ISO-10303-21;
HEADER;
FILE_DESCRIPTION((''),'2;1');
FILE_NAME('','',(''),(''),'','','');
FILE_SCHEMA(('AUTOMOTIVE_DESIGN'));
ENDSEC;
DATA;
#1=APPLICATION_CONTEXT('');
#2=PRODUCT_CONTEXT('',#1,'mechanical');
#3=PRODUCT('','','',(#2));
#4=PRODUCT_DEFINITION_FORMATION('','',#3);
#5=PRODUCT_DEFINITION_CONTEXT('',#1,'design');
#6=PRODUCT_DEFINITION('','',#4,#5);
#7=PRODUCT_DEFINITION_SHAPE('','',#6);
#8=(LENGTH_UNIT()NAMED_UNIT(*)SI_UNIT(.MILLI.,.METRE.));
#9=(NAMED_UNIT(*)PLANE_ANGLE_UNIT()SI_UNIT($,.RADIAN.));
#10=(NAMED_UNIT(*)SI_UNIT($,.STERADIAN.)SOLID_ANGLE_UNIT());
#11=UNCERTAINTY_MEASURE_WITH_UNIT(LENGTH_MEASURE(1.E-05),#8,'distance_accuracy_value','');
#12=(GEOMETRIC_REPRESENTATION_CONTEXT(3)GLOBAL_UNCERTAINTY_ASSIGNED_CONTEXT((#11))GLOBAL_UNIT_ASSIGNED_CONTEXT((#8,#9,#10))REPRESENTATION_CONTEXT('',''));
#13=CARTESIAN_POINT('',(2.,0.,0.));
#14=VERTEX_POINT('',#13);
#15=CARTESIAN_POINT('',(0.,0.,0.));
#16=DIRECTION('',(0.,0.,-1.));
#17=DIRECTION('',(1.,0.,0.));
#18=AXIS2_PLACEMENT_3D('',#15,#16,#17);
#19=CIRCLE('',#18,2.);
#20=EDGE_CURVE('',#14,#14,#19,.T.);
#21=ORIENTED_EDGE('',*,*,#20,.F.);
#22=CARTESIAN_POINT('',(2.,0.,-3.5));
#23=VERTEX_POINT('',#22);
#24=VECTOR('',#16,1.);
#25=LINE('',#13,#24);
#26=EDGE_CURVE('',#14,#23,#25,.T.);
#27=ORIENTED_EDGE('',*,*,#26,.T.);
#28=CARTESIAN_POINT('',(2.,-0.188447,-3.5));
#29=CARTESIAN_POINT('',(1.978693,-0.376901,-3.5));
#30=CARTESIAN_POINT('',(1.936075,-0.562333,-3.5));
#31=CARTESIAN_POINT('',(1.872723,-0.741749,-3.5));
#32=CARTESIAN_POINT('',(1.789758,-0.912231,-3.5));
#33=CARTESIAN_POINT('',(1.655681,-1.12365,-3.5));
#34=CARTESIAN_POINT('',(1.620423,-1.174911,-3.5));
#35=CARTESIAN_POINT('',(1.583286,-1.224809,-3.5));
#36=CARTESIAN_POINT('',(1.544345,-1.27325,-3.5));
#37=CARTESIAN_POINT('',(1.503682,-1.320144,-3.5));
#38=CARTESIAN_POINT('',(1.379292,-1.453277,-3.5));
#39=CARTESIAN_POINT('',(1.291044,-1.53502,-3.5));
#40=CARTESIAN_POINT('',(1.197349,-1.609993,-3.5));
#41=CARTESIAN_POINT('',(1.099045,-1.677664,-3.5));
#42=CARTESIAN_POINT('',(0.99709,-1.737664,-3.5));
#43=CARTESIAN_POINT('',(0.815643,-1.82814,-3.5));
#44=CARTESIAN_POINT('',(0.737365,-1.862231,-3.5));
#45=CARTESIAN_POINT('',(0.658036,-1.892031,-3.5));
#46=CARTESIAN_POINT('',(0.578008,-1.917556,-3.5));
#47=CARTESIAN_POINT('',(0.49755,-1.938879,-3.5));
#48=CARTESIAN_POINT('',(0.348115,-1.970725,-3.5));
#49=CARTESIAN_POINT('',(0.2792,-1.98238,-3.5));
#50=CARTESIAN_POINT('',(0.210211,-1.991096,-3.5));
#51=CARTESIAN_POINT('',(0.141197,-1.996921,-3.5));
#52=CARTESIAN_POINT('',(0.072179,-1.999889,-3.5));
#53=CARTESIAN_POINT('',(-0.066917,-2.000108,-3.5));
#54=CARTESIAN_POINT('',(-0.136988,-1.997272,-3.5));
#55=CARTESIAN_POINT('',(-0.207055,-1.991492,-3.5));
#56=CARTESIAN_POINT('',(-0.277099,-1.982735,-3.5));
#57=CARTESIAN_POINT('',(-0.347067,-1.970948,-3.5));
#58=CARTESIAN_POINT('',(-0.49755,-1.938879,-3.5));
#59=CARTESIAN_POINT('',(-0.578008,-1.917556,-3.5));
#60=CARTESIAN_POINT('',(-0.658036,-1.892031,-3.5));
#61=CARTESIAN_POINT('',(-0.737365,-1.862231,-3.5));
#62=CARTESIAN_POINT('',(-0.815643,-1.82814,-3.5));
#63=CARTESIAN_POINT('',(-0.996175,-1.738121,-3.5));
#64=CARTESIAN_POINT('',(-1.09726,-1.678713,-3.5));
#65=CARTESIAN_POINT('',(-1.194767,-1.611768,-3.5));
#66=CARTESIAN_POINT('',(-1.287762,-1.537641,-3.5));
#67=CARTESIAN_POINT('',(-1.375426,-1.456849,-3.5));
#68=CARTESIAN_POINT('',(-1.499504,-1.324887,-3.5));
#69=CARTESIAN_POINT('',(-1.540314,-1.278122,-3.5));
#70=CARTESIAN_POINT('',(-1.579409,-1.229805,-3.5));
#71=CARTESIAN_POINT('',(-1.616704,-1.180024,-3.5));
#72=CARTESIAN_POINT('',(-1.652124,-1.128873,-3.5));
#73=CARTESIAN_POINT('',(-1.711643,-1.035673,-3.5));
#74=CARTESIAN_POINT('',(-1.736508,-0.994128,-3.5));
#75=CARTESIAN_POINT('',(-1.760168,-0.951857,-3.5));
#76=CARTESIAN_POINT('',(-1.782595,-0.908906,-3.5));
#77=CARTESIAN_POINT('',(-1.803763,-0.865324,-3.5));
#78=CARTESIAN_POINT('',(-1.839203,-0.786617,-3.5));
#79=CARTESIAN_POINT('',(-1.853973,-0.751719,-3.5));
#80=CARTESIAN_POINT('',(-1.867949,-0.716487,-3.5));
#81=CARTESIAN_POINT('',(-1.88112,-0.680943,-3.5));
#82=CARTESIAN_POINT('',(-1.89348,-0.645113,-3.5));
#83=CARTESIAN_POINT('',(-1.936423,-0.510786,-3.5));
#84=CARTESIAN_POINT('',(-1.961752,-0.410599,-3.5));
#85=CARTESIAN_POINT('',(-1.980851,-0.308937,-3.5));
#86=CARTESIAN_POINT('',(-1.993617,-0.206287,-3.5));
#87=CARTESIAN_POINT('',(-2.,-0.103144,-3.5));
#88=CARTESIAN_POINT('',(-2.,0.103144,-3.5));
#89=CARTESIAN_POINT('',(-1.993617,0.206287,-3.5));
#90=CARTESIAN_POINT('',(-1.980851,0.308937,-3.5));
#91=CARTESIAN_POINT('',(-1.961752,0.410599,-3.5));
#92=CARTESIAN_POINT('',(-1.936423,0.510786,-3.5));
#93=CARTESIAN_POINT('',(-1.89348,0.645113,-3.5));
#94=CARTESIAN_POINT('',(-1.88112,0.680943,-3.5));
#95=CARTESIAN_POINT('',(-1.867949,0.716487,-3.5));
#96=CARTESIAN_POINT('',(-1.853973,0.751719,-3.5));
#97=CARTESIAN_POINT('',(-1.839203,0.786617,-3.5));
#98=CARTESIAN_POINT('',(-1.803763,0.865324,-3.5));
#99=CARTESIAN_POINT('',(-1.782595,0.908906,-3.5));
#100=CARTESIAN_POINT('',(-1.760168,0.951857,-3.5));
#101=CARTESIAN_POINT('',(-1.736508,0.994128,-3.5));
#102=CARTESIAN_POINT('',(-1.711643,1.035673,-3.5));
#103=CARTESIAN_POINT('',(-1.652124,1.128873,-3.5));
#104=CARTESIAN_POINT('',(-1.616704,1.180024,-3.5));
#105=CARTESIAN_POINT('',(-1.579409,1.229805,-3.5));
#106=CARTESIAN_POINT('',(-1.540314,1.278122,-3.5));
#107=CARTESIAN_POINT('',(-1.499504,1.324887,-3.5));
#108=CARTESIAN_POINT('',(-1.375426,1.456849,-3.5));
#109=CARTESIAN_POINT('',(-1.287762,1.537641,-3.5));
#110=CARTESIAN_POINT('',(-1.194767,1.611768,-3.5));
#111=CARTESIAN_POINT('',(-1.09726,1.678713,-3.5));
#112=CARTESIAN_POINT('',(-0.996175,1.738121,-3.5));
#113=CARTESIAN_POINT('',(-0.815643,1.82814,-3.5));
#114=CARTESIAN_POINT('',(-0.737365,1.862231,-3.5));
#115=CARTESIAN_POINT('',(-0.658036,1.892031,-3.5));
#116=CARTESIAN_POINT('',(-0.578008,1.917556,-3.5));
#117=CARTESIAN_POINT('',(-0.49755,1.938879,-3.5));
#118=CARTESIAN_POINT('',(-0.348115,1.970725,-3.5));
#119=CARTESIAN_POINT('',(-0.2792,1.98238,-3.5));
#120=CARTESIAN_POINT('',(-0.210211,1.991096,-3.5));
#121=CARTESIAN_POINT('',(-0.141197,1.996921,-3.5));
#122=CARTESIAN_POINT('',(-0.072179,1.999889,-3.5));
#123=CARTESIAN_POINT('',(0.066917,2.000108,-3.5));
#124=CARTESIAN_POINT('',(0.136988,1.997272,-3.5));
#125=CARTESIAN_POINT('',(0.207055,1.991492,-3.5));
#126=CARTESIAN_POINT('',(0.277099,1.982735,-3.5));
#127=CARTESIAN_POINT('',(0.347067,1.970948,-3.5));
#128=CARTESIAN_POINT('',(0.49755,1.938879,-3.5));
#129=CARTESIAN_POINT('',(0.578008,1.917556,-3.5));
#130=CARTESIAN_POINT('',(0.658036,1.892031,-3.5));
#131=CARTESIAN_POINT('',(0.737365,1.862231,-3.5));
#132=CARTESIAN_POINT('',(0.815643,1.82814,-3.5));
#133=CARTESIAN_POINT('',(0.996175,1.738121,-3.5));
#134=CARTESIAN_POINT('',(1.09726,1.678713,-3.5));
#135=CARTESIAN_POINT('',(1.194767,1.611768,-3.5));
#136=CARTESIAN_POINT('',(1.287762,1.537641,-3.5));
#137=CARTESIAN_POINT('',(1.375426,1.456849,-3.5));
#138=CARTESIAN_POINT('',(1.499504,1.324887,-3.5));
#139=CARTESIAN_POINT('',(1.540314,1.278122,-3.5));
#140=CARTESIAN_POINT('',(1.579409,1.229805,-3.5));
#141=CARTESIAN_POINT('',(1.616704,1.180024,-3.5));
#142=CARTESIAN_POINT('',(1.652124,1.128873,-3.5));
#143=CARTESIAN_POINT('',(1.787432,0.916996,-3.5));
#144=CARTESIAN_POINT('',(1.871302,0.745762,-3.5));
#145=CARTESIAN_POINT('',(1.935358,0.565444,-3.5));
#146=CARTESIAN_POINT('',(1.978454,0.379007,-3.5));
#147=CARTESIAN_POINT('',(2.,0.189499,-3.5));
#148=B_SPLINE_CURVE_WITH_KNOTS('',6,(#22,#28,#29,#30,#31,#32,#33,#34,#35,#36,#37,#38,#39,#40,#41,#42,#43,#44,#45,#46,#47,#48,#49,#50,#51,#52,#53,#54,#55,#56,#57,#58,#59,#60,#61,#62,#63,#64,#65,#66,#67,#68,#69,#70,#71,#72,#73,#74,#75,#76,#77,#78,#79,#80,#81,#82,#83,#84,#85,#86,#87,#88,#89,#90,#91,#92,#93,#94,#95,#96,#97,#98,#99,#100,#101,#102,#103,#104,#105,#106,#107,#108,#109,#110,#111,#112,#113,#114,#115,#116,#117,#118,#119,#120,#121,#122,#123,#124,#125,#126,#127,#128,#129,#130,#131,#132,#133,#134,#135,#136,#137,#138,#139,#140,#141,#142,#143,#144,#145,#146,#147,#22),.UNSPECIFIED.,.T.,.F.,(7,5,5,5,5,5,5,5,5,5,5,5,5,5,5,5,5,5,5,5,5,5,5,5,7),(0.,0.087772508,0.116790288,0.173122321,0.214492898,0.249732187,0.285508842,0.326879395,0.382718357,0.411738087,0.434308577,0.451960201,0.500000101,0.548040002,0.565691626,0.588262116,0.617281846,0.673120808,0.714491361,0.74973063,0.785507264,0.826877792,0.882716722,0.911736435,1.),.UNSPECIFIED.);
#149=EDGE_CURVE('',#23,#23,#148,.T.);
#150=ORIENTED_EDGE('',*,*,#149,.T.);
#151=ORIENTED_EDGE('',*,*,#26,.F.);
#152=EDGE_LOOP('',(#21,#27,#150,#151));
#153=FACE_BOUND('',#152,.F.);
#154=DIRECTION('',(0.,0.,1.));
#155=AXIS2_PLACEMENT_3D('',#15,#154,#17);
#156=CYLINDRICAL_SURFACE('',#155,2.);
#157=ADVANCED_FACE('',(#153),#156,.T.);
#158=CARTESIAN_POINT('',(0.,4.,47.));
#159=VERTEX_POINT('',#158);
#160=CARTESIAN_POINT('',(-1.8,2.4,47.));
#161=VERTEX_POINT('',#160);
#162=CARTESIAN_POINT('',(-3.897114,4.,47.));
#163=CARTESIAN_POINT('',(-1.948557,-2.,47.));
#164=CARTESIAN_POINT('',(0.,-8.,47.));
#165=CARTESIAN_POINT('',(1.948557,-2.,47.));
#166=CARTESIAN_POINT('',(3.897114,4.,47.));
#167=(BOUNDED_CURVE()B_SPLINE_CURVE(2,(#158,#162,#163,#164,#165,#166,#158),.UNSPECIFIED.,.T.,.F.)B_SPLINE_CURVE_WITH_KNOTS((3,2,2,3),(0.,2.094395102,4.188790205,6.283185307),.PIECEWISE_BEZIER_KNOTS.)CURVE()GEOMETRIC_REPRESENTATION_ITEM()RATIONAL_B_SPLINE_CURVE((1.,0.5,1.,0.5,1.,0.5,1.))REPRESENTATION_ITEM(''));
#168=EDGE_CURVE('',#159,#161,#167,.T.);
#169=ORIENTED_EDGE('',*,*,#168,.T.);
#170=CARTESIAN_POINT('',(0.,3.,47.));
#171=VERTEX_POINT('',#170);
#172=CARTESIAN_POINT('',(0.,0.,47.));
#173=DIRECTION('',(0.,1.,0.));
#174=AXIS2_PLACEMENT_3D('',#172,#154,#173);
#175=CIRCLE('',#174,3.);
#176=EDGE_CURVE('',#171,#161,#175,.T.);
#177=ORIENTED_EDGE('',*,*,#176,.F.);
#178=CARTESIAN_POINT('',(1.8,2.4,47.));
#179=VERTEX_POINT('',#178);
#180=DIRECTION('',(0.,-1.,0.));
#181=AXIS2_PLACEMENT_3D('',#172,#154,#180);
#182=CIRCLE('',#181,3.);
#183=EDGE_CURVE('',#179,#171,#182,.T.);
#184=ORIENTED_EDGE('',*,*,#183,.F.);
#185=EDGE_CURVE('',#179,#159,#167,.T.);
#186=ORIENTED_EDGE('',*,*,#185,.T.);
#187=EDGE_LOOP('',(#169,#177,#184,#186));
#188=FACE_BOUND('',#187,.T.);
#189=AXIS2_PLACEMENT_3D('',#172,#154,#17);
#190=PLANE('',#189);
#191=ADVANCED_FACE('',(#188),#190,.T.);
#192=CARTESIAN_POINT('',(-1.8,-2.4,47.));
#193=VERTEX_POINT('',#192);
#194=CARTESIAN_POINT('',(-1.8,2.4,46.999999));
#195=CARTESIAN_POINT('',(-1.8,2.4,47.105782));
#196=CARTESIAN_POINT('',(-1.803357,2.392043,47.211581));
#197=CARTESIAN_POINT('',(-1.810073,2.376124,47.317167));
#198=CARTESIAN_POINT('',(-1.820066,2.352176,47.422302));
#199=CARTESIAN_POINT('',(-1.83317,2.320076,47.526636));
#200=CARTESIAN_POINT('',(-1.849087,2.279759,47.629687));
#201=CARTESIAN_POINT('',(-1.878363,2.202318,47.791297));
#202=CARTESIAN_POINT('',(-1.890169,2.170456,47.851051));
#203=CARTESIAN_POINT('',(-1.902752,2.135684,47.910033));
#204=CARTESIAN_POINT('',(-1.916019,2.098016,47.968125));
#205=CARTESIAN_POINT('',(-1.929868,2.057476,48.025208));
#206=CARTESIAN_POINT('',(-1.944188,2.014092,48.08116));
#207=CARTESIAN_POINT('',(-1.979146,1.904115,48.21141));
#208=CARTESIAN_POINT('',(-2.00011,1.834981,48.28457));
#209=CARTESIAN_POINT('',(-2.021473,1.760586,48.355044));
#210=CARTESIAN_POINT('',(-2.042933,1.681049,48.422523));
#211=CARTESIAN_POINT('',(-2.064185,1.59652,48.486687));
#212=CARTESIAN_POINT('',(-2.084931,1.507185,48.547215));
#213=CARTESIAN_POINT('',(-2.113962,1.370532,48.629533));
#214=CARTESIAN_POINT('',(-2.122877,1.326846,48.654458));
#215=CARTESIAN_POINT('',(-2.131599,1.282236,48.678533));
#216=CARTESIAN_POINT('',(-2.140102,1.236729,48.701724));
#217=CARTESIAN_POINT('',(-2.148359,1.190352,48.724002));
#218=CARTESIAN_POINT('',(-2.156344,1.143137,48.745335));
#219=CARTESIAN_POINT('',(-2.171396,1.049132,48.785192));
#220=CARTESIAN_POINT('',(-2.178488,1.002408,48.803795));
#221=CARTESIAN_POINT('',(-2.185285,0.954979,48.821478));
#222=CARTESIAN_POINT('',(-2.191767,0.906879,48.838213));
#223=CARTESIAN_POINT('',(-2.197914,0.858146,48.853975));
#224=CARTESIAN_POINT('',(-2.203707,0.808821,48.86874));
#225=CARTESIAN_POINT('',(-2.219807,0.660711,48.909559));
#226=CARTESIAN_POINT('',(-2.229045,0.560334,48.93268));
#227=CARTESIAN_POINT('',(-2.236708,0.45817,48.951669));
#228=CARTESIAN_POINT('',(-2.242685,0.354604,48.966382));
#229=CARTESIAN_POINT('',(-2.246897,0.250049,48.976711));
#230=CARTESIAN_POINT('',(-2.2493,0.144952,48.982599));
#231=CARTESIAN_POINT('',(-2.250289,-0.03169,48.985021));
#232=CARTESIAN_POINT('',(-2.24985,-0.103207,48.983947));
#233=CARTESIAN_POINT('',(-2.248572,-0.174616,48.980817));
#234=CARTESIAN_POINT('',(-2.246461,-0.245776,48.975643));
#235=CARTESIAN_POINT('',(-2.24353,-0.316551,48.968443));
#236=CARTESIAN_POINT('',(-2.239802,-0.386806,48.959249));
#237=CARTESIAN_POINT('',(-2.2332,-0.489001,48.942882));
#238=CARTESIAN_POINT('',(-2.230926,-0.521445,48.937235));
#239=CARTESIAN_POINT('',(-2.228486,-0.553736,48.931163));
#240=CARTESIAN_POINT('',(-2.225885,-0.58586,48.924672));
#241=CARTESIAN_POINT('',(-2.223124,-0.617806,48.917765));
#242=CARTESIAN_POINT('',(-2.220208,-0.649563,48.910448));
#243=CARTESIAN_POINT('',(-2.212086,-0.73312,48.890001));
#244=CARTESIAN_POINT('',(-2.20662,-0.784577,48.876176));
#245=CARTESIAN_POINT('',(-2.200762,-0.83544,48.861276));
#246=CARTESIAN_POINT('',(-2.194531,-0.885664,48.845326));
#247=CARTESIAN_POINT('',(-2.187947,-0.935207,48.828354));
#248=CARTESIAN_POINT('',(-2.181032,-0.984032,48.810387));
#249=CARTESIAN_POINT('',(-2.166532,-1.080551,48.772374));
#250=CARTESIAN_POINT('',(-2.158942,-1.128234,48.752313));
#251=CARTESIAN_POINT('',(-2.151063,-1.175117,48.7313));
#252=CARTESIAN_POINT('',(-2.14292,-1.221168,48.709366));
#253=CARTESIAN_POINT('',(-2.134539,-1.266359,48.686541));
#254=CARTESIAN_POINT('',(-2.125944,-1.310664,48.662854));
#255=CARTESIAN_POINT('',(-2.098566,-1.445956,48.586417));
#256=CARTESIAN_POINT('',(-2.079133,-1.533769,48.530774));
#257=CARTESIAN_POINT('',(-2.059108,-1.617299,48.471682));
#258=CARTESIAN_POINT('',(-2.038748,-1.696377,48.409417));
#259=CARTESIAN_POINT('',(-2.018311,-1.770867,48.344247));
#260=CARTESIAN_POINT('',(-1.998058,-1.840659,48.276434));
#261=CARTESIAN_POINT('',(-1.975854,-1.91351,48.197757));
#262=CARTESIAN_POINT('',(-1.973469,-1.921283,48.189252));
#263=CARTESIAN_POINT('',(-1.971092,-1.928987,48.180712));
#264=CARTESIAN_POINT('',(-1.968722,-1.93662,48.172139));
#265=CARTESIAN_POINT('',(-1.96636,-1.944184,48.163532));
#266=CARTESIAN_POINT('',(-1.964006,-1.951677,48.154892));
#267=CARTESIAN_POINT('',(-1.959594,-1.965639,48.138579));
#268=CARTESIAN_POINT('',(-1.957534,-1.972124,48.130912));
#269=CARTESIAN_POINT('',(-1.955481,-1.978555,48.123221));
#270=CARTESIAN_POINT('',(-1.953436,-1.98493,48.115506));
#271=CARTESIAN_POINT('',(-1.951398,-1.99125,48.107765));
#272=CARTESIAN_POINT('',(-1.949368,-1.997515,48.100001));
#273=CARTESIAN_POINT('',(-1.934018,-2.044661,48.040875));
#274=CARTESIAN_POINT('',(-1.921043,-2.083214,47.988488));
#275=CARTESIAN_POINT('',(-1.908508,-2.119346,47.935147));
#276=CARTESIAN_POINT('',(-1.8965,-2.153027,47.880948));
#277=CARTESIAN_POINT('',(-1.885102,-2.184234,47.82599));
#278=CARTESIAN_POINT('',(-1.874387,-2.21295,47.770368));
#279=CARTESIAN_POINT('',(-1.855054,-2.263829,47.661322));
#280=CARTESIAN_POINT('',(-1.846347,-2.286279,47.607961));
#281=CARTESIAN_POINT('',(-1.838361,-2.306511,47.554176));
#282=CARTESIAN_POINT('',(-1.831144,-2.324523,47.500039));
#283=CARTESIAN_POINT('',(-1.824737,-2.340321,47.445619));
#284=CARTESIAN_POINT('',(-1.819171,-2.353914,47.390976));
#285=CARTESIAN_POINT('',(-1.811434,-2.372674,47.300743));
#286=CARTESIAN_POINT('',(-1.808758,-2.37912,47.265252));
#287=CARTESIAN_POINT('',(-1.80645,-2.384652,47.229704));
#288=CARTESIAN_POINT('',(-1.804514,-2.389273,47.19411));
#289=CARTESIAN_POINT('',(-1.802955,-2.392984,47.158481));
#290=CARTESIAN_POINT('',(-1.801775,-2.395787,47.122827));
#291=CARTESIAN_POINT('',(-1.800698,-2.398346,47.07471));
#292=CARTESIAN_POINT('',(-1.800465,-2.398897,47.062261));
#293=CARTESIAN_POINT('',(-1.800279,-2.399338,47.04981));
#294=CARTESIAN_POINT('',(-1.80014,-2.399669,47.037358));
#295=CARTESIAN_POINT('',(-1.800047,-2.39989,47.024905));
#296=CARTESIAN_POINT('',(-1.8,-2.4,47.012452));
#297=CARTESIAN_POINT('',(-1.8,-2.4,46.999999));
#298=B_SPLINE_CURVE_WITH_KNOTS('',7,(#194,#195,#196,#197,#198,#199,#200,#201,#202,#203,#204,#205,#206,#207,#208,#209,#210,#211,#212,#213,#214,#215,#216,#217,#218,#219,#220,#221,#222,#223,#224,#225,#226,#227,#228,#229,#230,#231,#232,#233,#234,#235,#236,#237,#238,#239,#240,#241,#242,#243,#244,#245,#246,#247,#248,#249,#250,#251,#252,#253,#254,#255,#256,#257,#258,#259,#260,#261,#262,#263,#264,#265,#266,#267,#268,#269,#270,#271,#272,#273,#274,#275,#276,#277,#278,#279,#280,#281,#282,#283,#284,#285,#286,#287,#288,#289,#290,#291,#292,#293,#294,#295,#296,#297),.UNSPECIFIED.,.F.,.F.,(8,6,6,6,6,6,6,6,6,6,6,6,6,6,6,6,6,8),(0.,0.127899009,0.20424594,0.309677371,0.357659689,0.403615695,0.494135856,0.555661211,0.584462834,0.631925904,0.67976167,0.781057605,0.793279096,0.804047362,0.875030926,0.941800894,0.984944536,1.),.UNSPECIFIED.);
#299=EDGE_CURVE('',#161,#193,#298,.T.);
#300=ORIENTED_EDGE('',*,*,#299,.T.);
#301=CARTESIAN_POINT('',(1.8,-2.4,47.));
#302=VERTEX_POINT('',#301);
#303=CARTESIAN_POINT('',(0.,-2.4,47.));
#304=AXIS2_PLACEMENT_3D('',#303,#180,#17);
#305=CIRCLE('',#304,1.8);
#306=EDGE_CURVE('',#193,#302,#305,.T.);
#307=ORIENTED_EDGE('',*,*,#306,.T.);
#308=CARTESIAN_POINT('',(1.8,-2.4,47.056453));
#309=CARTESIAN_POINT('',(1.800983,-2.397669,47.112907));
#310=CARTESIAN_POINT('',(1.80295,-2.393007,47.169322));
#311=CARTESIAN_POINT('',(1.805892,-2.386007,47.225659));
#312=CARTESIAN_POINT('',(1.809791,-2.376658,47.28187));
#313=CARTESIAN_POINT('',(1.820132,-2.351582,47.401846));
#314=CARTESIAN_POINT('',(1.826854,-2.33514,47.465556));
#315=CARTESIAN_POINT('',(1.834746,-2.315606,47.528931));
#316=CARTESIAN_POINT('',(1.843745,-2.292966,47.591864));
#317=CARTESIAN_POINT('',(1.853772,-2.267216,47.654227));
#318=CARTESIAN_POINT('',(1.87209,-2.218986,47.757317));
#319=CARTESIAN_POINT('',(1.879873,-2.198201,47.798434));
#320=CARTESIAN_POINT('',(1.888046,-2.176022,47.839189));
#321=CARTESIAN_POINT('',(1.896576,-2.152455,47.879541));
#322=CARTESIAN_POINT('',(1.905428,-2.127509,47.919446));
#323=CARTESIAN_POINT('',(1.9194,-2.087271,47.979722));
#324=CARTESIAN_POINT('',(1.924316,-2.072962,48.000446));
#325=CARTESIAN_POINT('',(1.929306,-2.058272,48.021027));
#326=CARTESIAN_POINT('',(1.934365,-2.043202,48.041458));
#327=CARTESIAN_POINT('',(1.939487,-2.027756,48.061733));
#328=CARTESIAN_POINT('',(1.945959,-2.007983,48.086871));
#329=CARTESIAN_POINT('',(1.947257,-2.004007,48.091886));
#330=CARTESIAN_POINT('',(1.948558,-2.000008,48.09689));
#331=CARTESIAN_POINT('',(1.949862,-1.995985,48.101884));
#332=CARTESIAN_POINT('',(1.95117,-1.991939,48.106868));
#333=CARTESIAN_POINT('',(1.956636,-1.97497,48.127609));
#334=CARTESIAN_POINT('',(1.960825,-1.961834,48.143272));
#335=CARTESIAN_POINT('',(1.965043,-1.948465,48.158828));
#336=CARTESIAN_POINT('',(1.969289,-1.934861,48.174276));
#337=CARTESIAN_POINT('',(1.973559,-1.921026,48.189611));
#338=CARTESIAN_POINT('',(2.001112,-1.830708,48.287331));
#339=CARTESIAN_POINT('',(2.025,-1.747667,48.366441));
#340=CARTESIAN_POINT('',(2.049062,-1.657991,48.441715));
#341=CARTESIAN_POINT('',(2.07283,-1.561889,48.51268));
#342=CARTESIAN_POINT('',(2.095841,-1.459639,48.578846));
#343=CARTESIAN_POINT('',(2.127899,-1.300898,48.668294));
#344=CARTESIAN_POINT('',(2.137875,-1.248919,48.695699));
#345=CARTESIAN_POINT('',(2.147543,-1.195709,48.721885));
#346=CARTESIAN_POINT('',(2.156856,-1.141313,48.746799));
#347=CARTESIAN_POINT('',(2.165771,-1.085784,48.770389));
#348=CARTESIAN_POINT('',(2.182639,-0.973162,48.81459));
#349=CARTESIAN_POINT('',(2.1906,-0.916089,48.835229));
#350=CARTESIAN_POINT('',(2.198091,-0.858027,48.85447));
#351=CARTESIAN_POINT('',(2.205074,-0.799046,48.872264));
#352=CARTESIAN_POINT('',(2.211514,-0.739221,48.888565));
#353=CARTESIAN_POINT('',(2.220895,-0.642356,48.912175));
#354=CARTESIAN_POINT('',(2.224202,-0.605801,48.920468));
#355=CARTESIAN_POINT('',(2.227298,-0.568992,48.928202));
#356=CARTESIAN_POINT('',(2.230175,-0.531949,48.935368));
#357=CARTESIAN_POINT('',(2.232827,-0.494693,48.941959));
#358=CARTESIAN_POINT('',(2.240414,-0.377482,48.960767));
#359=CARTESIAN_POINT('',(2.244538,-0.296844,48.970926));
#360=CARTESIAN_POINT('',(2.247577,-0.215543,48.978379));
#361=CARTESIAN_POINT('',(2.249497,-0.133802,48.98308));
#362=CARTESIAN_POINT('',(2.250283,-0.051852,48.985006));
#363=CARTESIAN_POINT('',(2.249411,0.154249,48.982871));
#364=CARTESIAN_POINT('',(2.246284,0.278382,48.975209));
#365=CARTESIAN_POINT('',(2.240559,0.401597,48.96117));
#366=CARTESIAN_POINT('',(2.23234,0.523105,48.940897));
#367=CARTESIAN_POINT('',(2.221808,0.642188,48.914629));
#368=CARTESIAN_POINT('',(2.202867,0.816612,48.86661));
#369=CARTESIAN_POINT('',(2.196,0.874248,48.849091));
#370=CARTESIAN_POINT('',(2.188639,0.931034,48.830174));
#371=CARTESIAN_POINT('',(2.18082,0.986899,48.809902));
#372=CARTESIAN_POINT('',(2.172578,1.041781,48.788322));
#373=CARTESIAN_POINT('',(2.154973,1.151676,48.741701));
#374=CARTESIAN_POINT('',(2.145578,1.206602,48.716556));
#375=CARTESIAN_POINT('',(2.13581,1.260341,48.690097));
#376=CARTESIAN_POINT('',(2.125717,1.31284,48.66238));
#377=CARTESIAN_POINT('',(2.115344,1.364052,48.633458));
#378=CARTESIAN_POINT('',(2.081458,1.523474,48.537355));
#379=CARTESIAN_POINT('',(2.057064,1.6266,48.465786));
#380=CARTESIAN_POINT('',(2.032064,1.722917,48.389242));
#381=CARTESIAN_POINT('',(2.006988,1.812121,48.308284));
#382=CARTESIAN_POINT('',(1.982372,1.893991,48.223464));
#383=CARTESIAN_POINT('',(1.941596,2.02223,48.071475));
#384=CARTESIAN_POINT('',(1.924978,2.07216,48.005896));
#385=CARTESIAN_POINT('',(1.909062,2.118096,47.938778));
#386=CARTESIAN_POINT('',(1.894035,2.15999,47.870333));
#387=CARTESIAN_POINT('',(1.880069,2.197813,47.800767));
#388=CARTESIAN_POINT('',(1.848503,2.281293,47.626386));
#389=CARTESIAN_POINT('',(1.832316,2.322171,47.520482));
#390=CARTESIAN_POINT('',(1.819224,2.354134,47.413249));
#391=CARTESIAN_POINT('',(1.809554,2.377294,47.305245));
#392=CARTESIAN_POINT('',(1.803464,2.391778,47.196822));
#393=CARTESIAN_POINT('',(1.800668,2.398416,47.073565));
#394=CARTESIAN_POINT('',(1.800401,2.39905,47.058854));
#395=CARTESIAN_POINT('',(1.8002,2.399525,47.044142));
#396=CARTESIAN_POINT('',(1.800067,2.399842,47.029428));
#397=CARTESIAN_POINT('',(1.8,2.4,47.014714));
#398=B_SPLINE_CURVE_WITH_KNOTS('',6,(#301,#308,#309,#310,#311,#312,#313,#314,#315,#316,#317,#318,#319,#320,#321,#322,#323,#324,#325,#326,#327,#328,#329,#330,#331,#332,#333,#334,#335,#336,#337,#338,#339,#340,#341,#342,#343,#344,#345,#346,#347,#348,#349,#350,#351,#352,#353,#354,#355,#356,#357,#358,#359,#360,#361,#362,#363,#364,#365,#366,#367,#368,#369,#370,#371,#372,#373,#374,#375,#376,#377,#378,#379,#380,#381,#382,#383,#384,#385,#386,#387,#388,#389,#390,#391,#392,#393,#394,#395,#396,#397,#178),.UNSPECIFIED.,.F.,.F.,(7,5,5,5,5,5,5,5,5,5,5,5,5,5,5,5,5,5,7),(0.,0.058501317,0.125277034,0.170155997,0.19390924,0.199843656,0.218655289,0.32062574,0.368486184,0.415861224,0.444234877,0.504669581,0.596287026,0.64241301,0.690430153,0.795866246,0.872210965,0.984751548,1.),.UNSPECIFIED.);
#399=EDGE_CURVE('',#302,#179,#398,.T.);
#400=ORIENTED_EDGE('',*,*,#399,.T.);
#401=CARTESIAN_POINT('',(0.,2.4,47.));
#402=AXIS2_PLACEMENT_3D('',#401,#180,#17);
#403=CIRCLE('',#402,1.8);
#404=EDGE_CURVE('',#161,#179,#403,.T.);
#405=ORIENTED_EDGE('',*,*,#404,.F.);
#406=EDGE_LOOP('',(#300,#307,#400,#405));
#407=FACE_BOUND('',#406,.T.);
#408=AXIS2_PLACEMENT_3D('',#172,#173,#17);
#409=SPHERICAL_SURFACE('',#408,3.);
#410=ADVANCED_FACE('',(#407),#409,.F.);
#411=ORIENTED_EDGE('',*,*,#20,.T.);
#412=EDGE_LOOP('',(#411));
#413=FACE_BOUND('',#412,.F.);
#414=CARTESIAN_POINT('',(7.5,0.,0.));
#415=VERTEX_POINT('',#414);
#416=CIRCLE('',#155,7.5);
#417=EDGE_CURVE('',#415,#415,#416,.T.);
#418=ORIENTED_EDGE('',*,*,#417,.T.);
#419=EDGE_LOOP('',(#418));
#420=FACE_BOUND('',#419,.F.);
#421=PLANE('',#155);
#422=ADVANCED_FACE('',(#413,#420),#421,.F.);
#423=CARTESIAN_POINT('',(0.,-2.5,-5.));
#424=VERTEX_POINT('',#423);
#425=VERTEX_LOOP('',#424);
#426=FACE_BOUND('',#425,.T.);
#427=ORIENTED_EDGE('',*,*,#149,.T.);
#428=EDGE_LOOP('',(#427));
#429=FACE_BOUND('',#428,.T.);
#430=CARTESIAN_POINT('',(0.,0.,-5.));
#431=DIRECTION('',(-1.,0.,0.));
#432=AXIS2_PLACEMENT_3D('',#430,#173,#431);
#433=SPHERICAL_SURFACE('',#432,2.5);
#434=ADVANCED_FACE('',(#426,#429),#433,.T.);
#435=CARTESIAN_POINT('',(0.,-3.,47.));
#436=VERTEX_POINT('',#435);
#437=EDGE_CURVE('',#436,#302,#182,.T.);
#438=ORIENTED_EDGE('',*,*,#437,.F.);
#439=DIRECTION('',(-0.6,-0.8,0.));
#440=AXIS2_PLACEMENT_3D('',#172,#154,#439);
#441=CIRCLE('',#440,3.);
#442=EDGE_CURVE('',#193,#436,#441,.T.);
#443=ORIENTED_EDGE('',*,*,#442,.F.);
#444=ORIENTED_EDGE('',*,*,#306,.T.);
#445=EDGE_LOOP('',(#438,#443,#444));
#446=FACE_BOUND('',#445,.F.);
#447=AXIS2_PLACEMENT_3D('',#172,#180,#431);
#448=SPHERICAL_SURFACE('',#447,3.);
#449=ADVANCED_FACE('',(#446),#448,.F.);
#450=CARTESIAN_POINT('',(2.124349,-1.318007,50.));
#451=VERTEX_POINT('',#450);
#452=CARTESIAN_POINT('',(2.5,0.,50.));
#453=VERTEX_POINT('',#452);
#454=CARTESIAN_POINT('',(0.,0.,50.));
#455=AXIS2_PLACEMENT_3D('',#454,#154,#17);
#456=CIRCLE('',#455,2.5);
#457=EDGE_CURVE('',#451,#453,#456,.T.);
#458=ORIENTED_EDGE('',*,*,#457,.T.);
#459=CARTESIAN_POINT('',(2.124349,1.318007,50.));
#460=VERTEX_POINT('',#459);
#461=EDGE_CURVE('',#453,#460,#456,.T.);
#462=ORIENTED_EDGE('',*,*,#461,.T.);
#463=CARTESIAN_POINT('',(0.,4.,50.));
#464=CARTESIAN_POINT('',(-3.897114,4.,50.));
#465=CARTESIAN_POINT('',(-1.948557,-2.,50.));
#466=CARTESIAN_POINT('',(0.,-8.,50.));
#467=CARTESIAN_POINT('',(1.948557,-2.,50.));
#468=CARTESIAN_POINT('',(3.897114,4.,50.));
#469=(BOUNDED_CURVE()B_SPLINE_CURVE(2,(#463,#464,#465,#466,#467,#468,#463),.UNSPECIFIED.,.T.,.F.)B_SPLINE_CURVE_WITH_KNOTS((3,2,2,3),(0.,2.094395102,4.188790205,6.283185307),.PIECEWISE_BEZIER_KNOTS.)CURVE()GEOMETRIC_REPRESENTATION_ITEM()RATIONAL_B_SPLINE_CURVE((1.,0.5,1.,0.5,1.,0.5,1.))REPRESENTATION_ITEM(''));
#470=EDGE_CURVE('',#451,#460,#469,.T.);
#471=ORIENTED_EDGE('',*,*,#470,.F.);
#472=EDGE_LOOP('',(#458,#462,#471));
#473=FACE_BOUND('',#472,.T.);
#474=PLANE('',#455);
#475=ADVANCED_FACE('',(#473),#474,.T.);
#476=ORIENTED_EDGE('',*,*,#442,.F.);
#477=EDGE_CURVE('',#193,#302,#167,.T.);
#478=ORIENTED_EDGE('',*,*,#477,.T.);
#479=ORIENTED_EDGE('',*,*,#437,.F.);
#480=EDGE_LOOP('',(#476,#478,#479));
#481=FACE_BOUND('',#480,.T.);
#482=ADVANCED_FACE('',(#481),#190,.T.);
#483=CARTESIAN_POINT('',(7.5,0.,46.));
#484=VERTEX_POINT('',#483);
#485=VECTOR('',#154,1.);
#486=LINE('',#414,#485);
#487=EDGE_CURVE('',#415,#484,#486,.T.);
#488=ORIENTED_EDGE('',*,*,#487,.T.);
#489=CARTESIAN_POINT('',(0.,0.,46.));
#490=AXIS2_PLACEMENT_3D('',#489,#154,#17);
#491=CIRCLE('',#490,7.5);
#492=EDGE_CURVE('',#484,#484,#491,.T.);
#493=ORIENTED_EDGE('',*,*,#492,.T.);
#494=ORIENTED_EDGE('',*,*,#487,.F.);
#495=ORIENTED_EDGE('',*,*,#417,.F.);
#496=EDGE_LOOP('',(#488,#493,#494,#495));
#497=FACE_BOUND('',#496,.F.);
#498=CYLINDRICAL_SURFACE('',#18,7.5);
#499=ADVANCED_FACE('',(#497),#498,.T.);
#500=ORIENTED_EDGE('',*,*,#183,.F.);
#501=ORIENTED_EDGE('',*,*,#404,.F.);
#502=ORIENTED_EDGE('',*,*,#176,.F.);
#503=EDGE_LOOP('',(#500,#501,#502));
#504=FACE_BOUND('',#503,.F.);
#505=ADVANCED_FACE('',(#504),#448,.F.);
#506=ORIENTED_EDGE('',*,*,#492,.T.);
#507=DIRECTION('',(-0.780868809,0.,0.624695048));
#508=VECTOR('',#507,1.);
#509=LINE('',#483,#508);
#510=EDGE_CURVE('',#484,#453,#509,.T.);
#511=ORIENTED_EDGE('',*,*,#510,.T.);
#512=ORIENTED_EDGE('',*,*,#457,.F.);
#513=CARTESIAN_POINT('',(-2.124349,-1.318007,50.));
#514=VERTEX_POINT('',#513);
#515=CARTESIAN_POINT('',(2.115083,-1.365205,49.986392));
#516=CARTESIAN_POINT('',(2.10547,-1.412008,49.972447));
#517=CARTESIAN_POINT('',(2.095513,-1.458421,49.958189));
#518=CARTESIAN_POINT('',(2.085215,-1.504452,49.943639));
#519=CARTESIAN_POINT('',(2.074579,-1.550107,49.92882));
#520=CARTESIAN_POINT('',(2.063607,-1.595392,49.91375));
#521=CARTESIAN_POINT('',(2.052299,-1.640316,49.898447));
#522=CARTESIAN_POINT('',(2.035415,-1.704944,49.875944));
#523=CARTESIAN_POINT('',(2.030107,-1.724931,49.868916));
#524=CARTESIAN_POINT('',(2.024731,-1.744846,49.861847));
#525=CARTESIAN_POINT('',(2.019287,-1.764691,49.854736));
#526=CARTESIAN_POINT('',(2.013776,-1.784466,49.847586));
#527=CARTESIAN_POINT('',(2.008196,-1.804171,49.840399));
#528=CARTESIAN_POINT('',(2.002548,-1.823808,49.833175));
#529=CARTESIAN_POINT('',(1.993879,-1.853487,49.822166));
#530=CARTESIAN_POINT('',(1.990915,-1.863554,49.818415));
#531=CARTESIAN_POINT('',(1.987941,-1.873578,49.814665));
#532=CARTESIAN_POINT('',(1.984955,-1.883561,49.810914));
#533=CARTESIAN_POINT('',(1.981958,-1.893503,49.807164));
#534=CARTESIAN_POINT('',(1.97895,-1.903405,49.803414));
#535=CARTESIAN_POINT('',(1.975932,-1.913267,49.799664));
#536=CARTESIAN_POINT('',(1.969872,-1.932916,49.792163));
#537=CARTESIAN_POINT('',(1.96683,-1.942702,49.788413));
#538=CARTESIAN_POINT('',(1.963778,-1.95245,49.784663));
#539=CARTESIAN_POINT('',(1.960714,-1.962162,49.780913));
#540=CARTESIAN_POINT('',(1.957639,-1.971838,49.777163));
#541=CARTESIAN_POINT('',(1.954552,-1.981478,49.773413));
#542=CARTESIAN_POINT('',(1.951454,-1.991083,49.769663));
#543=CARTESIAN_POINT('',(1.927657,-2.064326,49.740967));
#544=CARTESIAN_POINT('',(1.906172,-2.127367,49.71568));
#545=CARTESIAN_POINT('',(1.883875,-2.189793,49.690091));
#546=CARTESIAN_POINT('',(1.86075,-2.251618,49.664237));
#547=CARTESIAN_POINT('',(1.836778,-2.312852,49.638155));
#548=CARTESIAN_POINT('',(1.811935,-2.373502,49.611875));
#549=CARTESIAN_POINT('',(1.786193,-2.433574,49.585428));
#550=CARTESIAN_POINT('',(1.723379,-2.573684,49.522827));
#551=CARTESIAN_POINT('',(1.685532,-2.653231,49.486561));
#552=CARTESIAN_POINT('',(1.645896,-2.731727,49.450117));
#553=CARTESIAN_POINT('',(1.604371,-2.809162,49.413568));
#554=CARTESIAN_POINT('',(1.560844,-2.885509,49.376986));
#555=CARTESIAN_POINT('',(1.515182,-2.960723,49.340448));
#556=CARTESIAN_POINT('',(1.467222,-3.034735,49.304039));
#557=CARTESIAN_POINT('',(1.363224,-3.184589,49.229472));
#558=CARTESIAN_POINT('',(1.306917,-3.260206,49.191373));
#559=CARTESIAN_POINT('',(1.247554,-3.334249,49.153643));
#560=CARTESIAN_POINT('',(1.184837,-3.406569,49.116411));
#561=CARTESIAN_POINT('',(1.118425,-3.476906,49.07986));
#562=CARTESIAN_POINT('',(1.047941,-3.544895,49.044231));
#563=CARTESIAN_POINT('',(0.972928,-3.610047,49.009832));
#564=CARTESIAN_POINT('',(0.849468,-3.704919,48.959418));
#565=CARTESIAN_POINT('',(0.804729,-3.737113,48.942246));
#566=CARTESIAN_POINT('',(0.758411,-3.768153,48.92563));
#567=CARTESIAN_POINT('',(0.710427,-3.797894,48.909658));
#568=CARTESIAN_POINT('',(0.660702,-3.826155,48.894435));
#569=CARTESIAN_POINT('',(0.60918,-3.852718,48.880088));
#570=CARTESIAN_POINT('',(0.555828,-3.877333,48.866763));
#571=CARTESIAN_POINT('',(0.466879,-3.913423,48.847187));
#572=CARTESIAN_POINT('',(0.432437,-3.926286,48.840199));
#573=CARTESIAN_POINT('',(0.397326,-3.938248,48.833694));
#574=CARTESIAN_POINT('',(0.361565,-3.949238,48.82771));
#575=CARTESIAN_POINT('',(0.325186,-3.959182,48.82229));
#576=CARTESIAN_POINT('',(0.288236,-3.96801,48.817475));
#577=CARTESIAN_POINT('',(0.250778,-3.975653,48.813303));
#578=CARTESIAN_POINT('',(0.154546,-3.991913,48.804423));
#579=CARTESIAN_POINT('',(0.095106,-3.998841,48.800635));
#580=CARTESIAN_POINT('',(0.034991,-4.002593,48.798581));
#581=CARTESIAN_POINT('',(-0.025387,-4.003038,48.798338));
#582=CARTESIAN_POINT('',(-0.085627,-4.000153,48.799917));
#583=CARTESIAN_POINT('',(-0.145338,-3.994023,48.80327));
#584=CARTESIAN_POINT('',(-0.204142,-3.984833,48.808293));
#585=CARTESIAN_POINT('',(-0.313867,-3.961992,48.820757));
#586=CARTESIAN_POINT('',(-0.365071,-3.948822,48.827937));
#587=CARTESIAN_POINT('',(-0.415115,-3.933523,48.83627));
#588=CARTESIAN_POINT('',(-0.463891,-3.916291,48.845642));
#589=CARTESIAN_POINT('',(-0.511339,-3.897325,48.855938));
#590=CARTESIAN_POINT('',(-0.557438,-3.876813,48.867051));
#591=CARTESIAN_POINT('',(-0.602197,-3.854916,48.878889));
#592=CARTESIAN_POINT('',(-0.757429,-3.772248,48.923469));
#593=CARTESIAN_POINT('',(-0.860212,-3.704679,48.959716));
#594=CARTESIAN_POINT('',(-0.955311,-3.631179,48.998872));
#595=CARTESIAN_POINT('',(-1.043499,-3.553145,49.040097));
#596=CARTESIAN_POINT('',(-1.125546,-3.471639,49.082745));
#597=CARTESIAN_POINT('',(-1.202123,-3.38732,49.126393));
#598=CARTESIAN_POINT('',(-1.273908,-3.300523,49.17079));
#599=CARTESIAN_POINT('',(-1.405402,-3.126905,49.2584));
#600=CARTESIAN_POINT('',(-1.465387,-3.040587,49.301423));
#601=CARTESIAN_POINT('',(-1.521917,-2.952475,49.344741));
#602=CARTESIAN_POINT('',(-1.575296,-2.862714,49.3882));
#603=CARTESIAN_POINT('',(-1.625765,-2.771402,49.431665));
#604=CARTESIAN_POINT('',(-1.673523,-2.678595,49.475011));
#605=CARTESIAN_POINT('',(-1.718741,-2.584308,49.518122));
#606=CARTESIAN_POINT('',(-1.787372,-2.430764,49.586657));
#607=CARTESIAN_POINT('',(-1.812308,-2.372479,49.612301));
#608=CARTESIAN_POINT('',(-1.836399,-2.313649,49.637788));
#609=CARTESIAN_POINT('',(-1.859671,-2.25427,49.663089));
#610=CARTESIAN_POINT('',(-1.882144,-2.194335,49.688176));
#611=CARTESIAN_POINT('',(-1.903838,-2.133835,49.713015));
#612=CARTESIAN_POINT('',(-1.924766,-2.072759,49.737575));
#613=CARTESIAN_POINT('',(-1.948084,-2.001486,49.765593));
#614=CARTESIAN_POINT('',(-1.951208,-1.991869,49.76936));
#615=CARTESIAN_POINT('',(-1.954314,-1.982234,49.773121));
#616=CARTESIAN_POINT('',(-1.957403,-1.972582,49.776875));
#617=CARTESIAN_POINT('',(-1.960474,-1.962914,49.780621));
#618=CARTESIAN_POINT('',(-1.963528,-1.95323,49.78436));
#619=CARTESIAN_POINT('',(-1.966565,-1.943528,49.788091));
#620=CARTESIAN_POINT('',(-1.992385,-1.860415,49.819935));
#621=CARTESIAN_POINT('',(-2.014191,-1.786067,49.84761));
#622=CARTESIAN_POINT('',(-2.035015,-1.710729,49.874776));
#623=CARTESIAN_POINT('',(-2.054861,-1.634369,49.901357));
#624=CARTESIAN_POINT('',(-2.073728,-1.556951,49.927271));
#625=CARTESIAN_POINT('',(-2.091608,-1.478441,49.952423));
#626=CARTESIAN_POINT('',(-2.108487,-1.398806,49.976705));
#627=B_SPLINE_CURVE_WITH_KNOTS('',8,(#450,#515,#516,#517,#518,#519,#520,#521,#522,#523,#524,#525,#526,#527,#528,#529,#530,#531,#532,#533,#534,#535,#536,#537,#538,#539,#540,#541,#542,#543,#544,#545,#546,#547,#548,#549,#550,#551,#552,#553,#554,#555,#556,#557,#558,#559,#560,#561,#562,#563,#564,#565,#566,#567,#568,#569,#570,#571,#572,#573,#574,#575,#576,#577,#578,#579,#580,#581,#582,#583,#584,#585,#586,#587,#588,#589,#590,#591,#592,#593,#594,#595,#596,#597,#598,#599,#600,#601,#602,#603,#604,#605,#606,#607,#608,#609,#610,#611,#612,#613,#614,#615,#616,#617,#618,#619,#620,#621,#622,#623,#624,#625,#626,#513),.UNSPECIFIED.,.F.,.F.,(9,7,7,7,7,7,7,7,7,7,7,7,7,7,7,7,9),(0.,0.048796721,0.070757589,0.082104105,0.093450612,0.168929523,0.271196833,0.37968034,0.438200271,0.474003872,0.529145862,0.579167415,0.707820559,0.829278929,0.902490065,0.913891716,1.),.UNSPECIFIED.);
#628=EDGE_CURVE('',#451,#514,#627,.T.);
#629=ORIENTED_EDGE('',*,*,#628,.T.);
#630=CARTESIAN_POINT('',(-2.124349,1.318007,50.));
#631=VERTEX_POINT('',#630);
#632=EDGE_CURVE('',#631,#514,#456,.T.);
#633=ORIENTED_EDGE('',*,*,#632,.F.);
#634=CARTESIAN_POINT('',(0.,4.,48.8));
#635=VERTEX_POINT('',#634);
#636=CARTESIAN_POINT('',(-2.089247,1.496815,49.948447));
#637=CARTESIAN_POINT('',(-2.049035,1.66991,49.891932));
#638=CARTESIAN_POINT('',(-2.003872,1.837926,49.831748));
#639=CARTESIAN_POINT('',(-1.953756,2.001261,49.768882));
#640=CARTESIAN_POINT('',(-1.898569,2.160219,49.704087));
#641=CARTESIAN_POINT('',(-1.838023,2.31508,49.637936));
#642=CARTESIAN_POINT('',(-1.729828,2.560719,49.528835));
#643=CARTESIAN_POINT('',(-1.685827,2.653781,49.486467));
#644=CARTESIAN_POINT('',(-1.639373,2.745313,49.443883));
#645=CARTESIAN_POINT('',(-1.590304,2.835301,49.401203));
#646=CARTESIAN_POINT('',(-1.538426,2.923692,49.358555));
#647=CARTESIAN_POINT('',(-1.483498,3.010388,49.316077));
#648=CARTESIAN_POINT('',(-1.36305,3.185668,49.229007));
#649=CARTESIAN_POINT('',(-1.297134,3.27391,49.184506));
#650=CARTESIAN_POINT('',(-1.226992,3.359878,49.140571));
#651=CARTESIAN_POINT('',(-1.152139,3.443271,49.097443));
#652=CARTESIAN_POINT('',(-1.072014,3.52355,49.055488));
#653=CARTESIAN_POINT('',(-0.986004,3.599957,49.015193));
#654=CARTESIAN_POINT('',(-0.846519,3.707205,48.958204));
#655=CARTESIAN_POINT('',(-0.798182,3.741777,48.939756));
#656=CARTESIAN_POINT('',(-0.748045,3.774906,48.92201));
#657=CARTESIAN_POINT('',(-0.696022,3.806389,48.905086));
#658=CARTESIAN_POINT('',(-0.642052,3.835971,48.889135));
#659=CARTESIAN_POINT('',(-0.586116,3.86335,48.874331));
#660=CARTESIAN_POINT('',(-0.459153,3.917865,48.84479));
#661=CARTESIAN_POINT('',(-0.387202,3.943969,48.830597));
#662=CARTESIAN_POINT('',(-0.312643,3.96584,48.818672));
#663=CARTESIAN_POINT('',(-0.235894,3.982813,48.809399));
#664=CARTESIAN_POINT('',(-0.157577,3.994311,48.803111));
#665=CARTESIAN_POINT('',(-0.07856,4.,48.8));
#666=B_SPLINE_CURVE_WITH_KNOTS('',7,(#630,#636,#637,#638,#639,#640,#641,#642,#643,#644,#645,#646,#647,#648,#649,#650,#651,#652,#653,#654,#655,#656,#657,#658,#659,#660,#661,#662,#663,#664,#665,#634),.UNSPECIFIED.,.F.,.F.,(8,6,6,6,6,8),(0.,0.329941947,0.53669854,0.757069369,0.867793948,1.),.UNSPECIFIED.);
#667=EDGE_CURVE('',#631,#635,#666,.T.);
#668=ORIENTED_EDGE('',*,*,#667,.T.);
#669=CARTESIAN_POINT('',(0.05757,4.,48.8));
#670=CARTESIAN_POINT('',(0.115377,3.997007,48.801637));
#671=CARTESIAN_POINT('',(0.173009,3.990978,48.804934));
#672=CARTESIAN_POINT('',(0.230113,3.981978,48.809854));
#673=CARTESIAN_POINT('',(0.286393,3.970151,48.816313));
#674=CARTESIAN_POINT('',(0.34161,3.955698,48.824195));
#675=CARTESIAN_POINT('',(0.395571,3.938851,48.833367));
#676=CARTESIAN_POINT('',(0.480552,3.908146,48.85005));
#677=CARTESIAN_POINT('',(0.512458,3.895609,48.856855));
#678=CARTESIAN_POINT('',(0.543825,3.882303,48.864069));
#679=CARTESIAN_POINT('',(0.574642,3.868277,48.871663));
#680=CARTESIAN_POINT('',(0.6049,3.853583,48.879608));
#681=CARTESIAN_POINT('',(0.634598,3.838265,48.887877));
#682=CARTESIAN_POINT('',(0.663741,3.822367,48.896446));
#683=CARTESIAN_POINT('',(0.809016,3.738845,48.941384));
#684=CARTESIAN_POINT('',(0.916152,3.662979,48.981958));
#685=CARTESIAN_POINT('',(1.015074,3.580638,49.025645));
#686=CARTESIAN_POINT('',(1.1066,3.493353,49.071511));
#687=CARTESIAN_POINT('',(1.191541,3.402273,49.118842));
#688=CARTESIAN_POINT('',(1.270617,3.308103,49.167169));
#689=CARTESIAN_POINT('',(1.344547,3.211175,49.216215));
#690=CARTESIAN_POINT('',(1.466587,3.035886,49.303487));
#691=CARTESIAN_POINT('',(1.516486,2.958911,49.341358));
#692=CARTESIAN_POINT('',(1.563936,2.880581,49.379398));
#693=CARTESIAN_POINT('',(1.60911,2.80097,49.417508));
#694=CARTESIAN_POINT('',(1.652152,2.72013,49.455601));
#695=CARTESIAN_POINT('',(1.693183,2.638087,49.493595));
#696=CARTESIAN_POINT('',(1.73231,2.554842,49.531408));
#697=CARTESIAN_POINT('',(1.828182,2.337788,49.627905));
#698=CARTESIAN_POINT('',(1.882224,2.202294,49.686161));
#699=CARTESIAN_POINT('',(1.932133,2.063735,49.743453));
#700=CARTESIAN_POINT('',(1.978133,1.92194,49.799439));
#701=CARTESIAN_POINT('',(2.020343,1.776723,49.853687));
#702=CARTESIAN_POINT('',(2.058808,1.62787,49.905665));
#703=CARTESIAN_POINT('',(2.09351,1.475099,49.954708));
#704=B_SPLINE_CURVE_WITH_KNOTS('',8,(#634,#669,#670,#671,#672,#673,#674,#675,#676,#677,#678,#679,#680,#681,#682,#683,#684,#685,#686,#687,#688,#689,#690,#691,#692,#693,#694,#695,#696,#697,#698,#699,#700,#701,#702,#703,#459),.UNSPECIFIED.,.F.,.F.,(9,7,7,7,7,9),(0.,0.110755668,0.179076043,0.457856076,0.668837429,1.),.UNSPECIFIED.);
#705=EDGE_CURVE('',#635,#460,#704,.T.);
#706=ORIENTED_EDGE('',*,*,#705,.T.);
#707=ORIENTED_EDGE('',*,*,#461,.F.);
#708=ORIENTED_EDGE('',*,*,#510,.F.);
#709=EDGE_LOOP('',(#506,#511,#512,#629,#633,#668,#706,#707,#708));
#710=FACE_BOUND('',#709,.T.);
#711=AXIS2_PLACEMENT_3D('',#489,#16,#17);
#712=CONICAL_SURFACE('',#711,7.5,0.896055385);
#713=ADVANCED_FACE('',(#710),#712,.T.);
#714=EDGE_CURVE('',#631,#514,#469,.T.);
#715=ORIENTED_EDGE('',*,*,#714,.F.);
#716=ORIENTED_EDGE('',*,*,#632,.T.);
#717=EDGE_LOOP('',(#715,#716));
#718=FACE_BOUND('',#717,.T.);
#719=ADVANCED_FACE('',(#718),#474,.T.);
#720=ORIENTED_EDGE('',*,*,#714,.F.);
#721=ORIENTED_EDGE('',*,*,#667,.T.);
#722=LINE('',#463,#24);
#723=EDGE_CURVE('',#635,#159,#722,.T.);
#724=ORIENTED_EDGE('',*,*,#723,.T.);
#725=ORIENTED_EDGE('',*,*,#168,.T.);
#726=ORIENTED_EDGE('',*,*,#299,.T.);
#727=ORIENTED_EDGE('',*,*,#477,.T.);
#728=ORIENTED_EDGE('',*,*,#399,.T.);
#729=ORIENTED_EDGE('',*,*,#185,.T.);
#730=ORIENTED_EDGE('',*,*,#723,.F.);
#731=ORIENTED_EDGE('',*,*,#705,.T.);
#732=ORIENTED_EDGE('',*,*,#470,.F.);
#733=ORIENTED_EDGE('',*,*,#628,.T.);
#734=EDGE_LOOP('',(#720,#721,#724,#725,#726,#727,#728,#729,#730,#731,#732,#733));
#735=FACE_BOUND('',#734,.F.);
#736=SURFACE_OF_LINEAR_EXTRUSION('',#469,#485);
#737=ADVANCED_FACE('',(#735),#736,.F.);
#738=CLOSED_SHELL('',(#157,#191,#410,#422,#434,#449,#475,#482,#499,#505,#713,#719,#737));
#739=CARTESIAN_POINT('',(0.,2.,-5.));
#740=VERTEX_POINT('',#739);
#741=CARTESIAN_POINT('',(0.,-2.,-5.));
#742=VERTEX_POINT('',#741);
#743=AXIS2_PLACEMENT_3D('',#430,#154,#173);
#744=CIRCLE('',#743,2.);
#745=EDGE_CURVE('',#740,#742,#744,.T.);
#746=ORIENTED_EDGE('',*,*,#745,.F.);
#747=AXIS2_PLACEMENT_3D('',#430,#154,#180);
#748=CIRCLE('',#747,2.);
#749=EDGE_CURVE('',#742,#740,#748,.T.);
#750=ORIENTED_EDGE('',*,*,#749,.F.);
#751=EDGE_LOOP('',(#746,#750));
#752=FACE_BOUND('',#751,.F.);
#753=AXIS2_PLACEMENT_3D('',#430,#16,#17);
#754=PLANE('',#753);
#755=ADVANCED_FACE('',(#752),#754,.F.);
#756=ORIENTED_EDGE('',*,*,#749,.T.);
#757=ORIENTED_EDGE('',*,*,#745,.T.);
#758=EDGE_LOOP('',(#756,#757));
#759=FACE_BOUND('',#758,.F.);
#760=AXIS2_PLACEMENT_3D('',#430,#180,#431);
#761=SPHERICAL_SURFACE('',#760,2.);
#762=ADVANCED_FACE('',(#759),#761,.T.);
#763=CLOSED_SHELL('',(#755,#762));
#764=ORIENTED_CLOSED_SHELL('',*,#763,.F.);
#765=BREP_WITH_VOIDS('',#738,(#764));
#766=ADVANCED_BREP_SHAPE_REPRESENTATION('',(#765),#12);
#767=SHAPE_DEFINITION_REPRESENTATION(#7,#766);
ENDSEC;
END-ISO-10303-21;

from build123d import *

# Parameters (mm, degrees)
F0_R     = 7.5
F1_DEPTH = 50
F2_R     = 2
F3_DEPTH = 5
F7_DEPTH = 3


# Not quite as in the source:
# - a fillet or chamfer that OpenCascade refuses, or shapes differently, is made with other operations: its cross-section is extruded or revolved along the edge and cut away or added


with BuildPart() as f1:
    # F0 (on Top) → F1 (new body)
    with BuildSketch(Plane.XY):
        Circle(F0_R)
    extrude(amount=F1_DEPTH)

    # F2 (on face) → F3 (join)
    with BuildSketch(Plane(origin=(0, 0, 0), x_dir=(1, 0, 0), z_dir=(0, 0, -1))):
        Circle(F2_R)
    extrude(amount=F3_DEPTH)

    # F4 (on face) → F5 (revolve)
    with BuildSketch(Plane(origin=(0, 0, -5), x_dir=(1, 0, 0), z_dir=(0, 0, -1))):
        with BuildLine():
            Line((0, 2), (0, 2.5))
            ThreePointArc((0, 2.5), (-2.5, 0), (0, -2.5))
            Line((0, -2.5), (0, -2))
            ThreePointArc((0, -2), (-2, 0), (0, 2))
        make_face()
    revolve(axis=Axis((0, 0, -5), (0, 1, 0)))

    # F6 (on face) → F7 (cut)
    with BuildSketch(Plane.XY.offset(50)):
        with BuildLine():
            add(Edge.make_bspline(
                [(0, 4), (-3.897114317, 4), (-1.9485571585, -2), (0, -8), (1.9485571585, -2), (3.897114317, 4), (0, 4)],
                knots=[0, 0, 0, 2.0943951024, 2.0943951024, 4.1887902048, 4.1887902048, 6.2831853072, 6.2831853072, 6.2831853072], degree=2, weights=[1, 0.5, 1, 0.5, 1, 0.5, 1]))
        make_face()
    extrude(amount=-F7_DEPTH, mode=Mode.SUBTRACT)

    # F8 (on face) → F9 (revolve, cut)
    with BuildSketch(Plane.XY.offset(47)):
        with BuildLine():
            ThreePointArc((1.8, -2.4), (2.683281573, -1.3416407865), (3, 0))
            ThreePointArc((3, 0), (2.683281573, 1.3416407865), (1.8, 2.4))
            add(Edge.make_bspline(
                [(1.8, -2.4), (1.8810311774, -2.2079260981), (1.9485571585, -2), (2.6913429511, 0.2871870789), (1.8, 2.4)],
                knots=[4.0484923357, 4.0484923357, 4.0484923357, 4.1887902048, 4.1887902048, 5.3448576064, 5.3448576064, 5.3448576064], degree=2, weights=[0.9375, 0.9665063509, 1, 0.7240092377, 0.7527020789]))
        make_face()
        with BuildLine():
            Line((0, -3), (0, 3))
            ThreePointArc((0, 3), (-0.9486832981, 2.8460498942), (-1.8, 2.4))
            add(Edge.make_bspline(
                [(-1.8, 2.4), (-2.6913429511, 0.2871870789), (-1.9485571585, -2), (-1.8810311774, -2.2079260981), (-1.8, -2.4)],
                knots=[0.9383277008, 0.9383277008, 0.9383277008, 2.0943951024, 2.0943951024, 2.2346929715, 2.2346929715, 2.2346929715], degree=2, weights=[0.7527020789, 0.7240092377, 1, 0.9665063509, 0.9375]))
            ThreePointArc((-1.8, -2.4), (-0.9486832981, -2.8460498942), (0, -3))
        make_face()
    revolve(axis=Axis((0, 0, 47), (0, -1, 0)), mode=Mode.SUBTRACT)

    # F10: chamfer of 5 x 4 on 1 edges, made by hand

    # F10_s1 → F10_t2 (revolve, cut)
    with BuildSketch(Plane.XZ):
        Polygon((7.5, 46), (2.5, 50), (7.5, 50), align=None)
    revolve(axis=Axis((0, 0, 50), (0, 0, 1)), mode=Mode.SUBTRACT)


solid = f1.part
